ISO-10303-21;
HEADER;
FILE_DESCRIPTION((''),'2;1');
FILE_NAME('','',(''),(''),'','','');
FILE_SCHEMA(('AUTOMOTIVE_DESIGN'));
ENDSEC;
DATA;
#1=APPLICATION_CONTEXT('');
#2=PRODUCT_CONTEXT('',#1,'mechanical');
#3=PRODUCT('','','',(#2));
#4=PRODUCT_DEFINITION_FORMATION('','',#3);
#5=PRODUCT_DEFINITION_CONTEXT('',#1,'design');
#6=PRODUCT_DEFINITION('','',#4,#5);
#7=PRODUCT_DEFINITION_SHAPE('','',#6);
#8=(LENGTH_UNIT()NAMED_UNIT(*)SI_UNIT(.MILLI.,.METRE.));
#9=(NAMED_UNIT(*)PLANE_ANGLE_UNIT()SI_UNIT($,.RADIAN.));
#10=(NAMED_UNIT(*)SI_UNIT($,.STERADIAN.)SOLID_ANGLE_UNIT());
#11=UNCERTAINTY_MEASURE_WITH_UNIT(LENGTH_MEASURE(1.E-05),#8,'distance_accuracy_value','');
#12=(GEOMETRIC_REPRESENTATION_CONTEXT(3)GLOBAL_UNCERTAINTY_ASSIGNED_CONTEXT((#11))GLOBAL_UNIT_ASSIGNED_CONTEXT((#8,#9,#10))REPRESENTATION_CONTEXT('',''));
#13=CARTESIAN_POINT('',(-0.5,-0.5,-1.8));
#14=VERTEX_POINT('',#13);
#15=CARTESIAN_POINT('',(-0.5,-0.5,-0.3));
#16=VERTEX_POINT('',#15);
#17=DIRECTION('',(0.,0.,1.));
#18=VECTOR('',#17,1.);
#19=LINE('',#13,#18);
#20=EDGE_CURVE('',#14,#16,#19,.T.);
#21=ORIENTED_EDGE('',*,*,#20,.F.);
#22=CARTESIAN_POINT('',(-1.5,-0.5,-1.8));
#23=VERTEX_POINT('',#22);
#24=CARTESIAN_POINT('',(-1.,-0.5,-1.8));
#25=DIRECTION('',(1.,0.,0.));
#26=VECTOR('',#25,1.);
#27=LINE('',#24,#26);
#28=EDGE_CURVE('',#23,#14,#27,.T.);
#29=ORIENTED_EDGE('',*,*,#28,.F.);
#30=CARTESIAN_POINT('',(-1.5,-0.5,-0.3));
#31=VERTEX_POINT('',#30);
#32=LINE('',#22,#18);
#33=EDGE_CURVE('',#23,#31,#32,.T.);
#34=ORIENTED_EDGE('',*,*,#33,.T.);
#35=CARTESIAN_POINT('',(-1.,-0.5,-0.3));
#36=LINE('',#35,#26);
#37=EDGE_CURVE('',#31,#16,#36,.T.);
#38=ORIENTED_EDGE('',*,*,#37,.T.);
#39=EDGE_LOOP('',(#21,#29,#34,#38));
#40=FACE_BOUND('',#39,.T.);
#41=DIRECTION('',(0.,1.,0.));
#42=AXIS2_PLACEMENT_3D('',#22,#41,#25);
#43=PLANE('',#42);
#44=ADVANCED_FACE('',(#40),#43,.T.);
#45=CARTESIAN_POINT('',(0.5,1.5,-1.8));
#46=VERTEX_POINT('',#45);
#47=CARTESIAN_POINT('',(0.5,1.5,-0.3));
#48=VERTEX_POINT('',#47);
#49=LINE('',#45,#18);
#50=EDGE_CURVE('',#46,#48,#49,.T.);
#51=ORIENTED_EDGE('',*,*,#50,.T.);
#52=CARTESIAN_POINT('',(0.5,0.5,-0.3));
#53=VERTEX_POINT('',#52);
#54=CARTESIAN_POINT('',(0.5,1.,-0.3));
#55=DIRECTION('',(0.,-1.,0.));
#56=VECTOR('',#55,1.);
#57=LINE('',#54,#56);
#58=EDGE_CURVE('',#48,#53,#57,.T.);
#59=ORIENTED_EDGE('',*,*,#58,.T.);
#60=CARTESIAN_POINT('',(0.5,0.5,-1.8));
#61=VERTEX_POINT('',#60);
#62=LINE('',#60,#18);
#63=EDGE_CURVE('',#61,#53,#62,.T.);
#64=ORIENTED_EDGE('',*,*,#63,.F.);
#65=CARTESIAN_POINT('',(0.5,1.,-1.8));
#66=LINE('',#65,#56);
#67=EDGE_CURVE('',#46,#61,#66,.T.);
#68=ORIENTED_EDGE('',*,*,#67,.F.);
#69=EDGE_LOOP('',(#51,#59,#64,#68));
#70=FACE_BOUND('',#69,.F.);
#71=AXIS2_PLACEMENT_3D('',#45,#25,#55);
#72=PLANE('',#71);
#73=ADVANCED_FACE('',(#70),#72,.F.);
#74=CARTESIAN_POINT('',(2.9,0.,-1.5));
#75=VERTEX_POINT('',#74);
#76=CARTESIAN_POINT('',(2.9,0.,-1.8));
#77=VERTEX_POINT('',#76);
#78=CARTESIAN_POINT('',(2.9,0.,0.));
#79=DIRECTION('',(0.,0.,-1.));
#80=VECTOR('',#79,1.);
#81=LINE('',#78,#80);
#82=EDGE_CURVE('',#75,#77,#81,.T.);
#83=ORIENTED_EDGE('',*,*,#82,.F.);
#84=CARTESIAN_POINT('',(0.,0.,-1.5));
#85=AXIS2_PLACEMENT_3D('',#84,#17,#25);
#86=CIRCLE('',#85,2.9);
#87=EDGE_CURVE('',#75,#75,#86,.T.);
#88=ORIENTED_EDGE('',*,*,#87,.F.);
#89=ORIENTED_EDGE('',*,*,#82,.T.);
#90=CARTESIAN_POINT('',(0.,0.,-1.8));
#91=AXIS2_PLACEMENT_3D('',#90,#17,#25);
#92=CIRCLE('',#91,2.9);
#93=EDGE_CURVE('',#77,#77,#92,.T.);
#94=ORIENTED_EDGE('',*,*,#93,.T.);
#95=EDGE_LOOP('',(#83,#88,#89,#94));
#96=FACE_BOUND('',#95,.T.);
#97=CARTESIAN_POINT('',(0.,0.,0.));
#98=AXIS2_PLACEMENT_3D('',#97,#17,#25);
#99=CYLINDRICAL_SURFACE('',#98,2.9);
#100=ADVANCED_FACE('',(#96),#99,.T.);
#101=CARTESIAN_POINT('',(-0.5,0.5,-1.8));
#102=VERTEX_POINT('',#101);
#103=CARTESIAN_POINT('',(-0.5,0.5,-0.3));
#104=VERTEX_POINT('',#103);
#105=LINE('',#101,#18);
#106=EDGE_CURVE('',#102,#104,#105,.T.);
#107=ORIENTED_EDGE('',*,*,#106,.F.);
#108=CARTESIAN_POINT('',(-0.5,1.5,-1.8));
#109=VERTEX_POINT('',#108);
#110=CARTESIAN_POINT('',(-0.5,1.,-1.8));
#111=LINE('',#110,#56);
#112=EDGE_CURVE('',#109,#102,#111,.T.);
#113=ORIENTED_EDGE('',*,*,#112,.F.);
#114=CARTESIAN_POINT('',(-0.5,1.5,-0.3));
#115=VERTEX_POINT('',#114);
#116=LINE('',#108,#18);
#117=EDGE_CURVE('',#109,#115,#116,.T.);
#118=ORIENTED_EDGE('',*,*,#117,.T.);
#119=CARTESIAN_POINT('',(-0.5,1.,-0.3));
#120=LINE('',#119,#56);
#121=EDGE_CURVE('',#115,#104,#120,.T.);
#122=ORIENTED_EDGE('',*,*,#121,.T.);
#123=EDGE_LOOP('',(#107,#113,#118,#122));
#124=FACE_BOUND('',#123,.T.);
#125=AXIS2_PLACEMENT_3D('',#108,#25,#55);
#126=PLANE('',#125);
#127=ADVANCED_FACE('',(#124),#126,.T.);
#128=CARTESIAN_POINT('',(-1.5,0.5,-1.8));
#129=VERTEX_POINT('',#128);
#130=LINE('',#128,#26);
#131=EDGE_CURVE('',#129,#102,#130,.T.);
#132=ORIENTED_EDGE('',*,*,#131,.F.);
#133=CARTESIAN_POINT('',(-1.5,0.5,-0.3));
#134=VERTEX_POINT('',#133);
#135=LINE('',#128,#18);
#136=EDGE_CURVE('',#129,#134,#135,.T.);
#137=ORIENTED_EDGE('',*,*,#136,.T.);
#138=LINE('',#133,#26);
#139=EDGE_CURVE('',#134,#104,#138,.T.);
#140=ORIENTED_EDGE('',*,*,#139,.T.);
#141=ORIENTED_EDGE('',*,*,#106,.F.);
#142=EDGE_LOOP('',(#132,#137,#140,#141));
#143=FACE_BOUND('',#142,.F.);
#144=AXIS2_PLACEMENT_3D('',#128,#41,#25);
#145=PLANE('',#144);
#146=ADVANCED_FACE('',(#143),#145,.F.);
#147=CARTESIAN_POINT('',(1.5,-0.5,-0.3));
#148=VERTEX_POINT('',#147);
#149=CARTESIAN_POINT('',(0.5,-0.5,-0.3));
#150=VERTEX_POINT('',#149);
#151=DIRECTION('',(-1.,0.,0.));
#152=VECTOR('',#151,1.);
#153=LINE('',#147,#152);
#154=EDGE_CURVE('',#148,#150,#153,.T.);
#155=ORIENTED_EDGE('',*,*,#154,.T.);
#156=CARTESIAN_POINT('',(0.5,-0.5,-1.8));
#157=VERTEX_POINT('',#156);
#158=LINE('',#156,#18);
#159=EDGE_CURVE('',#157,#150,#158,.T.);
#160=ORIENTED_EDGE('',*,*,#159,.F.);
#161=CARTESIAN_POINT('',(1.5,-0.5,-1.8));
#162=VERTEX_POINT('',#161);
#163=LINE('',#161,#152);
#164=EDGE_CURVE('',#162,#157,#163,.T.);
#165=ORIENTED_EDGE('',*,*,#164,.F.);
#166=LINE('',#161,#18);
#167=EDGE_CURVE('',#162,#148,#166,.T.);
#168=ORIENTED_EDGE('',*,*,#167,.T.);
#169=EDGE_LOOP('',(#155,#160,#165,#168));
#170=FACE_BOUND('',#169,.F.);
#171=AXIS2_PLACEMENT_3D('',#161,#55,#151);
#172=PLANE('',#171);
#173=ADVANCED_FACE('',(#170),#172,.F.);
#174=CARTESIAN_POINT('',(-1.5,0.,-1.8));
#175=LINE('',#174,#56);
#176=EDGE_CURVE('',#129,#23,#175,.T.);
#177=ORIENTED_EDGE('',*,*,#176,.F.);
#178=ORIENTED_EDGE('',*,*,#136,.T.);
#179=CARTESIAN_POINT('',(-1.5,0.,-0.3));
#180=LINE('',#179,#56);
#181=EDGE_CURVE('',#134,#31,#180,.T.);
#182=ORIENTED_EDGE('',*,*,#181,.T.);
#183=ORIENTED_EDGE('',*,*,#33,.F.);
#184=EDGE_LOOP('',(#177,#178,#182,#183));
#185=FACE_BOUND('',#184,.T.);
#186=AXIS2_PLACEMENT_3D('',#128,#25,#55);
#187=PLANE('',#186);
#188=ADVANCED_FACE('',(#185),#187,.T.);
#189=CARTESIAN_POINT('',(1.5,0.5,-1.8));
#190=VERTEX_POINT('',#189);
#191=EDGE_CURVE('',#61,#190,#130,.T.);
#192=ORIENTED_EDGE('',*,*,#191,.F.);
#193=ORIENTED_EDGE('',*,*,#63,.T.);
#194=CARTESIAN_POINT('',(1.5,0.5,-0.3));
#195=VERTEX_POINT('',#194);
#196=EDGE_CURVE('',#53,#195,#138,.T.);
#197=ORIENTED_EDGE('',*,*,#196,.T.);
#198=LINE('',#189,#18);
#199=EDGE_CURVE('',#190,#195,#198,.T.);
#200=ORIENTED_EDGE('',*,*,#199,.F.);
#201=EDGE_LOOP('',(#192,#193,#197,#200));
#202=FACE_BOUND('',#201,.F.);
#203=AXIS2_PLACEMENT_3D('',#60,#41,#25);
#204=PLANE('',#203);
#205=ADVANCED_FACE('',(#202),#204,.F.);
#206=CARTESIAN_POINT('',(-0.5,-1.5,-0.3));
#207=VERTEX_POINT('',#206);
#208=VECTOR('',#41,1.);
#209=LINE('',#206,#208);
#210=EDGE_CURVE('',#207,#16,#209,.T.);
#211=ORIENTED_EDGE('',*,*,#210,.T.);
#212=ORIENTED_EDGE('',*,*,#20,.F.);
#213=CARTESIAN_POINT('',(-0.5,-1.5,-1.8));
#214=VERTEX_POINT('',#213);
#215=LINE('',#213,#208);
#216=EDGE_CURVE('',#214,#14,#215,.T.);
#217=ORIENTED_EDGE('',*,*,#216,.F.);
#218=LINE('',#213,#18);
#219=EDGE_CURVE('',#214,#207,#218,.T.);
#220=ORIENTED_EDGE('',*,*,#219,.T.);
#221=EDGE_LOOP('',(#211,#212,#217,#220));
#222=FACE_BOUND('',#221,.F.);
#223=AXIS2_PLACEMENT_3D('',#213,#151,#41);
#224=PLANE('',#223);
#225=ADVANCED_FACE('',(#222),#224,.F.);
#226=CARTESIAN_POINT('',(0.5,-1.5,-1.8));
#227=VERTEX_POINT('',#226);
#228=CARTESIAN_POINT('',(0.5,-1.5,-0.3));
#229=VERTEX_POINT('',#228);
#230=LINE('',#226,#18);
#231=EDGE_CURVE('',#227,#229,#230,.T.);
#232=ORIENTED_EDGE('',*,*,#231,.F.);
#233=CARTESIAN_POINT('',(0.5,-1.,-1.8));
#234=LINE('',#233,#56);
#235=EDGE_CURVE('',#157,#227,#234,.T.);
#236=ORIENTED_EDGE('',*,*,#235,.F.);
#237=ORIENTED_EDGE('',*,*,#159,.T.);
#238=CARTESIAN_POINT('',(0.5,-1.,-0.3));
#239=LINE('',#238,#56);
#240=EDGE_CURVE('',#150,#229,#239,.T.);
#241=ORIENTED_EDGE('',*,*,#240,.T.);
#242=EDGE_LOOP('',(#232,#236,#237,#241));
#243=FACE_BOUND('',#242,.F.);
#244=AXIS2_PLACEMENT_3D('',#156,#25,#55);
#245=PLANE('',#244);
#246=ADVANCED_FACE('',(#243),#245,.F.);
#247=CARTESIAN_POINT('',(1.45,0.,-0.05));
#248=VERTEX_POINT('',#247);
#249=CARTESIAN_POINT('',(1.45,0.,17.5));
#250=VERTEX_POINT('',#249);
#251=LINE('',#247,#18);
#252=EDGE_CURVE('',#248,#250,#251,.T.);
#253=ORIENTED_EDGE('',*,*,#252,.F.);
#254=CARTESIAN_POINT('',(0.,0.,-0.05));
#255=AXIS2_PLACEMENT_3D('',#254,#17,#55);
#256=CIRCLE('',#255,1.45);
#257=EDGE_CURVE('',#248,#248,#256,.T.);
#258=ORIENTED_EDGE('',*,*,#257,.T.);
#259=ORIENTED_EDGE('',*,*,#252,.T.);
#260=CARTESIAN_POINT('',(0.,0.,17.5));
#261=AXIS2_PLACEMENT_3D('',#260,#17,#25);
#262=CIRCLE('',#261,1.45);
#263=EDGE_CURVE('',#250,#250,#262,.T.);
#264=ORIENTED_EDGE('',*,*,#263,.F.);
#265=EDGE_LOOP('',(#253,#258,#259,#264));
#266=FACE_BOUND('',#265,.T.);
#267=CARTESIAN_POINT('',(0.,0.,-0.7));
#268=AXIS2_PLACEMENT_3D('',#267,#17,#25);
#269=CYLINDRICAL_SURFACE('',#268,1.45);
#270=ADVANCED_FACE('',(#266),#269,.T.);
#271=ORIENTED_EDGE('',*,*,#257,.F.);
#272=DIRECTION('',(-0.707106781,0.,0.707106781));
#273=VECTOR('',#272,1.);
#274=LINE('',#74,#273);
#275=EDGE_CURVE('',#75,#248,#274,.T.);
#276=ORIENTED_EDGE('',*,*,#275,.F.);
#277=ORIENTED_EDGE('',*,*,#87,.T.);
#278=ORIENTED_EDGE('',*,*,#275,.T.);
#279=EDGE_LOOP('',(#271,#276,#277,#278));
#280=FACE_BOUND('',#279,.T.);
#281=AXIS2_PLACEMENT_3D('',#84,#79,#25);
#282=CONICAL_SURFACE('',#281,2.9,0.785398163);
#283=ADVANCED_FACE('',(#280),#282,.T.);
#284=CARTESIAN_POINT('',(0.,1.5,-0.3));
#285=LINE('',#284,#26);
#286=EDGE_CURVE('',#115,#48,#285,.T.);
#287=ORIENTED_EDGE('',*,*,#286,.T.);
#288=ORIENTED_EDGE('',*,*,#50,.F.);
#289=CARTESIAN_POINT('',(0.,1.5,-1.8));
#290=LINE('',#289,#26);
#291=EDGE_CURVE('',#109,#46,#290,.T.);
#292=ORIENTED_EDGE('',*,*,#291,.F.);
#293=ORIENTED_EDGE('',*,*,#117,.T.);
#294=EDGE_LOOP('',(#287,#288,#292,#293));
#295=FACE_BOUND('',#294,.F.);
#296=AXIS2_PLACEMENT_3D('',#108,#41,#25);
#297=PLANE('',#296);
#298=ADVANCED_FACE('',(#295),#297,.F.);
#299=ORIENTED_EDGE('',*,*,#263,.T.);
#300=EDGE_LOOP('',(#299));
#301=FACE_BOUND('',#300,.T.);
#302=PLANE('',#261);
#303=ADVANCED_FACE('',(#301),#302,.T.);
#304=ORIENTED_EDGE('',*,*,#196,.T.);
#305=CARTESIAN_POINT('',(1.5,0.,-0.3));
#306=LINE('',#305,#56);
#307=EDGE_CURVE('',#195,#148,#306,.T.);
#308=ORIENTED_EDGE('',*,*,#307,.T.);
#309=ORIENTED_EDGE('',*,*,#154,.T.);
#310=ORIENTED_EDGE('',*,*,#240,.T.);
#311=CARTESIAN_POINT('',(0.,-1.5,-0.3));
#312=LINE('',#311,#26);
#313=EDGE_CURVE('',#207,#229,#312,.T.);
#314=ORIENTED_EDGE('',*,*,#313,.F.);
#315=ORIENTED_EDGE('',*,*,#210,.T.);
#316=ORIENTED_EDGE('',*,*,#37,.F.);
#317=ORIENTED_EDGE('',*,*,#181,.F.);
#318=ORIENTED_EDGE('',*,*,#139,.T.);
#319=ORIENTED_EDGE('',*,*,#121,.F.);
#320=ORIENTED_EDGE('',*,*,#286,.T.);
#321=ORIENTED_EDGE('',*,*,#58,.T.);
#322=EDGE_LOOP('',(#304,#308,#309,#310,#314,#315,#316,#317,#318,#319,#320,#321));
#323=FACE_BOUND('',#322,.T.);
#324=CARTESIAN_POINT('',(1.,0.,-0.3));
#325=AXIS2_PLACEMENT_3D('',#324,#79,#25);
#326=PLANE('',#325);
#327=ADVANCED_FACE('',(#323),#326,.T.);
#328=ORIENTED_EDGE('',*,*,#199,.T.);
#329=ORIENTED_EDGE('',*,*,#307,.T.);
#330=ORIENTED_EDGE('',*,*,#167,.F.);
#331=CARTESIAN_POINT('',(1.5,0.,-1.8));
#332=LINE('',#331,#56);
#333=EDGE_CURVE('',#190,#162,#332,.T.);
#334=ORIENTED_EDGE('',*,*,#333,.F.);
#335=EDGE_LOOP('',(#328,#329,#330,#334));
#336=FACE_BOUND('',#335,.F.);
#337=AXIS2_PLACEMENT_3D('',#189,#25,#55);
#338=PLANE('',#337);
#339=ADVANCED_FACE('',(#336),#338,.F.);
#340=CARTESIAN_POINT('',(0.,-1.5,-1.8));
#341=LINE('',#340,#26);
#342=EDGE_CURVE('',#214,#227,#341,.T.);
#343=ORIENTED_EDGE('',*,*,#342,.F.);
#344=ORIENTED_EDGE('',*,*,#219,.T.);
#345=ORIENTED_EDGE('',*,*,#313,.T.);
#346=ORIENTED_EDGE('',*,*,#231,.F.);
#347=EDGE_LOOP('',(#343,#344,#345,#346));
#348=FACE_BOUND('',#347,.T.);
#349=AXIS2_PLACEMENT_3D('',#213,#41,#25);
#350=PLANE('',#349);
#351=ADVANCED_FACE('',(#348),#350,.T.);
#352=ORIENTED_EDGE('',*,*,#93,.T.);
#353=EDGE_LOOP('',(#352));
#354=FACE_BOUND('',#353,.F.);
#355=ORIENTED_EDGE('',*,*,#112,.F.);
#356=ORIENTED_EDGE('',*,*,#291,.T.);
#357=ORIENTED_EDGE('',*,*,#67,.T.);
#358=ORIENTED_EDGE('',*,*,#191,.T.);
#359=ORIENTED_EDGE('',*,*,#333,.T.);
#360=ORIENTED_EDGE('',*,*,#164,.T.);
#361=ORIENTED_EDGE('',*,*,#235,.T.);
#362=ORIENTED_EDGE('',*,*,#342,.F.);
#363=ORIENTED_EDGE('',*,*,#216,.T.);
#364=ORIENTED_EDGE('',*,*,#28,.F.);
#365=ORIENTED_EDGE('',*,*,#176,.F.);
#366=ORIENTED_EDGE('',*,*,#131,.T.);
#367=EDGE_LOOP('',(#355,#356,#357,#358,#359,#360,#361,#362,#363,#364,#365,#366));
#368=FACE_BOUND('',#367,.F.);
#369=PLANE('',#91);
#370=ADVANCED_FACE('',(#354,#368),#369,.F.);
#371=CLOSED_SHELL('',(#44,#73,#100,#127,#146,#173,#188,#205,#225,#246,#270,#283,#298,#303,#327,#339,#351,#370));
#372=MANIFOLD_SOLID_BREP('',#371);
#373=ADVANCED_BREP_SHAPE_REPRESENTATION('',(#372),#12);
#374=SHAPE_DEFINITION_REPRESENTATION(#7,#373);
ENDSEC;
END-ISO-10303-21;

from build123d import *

# Parameters (mm, degrees)
F0_R        = 1.45
F1_DEPTH    = 17.5
F2_R        = 2.9
F3_DEPTH    = 1.8
F4_W        = 1
F4_H        = 1
F5_DEPTH    = 1.5
F6_S5_R     = 1.45
F6_T6_DEPTH = 6


# Not quite as in the source:
# - a fillet or chamfer that OpenCascade refuses, or shapes differently, is made with other operations: its cross-section is extruded or revolved along the edge and cut away or added


with BuildPart() as f1:
    # F0 (on Top) → F1 (new body)
    with BuildSketch(Plane.XY):
        Circle(F0_R)
    extrude(amount=F1_DEPTH)

    # F2 (on Top) → F3 (join)
    with BuildSketch(Plane.XY):
        Circle(F2_R)
    extrude(amount=-F3_DEPTH)

    # F4 (on face) → F5 (cut)
    with BuildSketch(Plane(origin=(0, 0, -1.8), x_dir=(1, 0, 0), z_dir=(0, 0, -1))):
        with Locations((1, 0)):
            Rectangle(F4_W, F4_H)
        Rectangle(F4_W, F4_H)
        with Locations((0, 1)):
            Rectangle(F4_W, F4_H)
        with Locations((-1, 0)):
            Rectangle(F4_W, F4_H)
        with Locations((0, -1)):
            Rectangle(F4_W, F4_H)
    extrude(amount=-F5_DEPTH, mode=Mode.SUBTRACT)

    # F6: chamfer of 1.5 on 1 edges, made by hand


with BuildPart() as f6_tool2:
    # F6_s3 → F6_t4 (revolve)
    with BuildSketch(Plane.XZ):
        Polygon((2.9, -1.5), (1.4, 0), (2.9, 0), align=None)
    revolve(axis=Axis((0, 0, 0), (0, 0, 1)))

    # F6_s5 → F6_t6 (cut, symmetric)
    with BuildSketch(Plane.XY.offset(-0.7)):
        Circle(F6_S5_R)
    extrude(amount=F6_T6_DEPTH, both=True, mode=Mode.SUBTRACT)


with BuildPart() as f1_1:
    add(f1.part)

    # F6_t1: cut F6_tool2
    add(f6_tool2.part, mode=Mode.SUBTRACT)


solid = f1_1.part
